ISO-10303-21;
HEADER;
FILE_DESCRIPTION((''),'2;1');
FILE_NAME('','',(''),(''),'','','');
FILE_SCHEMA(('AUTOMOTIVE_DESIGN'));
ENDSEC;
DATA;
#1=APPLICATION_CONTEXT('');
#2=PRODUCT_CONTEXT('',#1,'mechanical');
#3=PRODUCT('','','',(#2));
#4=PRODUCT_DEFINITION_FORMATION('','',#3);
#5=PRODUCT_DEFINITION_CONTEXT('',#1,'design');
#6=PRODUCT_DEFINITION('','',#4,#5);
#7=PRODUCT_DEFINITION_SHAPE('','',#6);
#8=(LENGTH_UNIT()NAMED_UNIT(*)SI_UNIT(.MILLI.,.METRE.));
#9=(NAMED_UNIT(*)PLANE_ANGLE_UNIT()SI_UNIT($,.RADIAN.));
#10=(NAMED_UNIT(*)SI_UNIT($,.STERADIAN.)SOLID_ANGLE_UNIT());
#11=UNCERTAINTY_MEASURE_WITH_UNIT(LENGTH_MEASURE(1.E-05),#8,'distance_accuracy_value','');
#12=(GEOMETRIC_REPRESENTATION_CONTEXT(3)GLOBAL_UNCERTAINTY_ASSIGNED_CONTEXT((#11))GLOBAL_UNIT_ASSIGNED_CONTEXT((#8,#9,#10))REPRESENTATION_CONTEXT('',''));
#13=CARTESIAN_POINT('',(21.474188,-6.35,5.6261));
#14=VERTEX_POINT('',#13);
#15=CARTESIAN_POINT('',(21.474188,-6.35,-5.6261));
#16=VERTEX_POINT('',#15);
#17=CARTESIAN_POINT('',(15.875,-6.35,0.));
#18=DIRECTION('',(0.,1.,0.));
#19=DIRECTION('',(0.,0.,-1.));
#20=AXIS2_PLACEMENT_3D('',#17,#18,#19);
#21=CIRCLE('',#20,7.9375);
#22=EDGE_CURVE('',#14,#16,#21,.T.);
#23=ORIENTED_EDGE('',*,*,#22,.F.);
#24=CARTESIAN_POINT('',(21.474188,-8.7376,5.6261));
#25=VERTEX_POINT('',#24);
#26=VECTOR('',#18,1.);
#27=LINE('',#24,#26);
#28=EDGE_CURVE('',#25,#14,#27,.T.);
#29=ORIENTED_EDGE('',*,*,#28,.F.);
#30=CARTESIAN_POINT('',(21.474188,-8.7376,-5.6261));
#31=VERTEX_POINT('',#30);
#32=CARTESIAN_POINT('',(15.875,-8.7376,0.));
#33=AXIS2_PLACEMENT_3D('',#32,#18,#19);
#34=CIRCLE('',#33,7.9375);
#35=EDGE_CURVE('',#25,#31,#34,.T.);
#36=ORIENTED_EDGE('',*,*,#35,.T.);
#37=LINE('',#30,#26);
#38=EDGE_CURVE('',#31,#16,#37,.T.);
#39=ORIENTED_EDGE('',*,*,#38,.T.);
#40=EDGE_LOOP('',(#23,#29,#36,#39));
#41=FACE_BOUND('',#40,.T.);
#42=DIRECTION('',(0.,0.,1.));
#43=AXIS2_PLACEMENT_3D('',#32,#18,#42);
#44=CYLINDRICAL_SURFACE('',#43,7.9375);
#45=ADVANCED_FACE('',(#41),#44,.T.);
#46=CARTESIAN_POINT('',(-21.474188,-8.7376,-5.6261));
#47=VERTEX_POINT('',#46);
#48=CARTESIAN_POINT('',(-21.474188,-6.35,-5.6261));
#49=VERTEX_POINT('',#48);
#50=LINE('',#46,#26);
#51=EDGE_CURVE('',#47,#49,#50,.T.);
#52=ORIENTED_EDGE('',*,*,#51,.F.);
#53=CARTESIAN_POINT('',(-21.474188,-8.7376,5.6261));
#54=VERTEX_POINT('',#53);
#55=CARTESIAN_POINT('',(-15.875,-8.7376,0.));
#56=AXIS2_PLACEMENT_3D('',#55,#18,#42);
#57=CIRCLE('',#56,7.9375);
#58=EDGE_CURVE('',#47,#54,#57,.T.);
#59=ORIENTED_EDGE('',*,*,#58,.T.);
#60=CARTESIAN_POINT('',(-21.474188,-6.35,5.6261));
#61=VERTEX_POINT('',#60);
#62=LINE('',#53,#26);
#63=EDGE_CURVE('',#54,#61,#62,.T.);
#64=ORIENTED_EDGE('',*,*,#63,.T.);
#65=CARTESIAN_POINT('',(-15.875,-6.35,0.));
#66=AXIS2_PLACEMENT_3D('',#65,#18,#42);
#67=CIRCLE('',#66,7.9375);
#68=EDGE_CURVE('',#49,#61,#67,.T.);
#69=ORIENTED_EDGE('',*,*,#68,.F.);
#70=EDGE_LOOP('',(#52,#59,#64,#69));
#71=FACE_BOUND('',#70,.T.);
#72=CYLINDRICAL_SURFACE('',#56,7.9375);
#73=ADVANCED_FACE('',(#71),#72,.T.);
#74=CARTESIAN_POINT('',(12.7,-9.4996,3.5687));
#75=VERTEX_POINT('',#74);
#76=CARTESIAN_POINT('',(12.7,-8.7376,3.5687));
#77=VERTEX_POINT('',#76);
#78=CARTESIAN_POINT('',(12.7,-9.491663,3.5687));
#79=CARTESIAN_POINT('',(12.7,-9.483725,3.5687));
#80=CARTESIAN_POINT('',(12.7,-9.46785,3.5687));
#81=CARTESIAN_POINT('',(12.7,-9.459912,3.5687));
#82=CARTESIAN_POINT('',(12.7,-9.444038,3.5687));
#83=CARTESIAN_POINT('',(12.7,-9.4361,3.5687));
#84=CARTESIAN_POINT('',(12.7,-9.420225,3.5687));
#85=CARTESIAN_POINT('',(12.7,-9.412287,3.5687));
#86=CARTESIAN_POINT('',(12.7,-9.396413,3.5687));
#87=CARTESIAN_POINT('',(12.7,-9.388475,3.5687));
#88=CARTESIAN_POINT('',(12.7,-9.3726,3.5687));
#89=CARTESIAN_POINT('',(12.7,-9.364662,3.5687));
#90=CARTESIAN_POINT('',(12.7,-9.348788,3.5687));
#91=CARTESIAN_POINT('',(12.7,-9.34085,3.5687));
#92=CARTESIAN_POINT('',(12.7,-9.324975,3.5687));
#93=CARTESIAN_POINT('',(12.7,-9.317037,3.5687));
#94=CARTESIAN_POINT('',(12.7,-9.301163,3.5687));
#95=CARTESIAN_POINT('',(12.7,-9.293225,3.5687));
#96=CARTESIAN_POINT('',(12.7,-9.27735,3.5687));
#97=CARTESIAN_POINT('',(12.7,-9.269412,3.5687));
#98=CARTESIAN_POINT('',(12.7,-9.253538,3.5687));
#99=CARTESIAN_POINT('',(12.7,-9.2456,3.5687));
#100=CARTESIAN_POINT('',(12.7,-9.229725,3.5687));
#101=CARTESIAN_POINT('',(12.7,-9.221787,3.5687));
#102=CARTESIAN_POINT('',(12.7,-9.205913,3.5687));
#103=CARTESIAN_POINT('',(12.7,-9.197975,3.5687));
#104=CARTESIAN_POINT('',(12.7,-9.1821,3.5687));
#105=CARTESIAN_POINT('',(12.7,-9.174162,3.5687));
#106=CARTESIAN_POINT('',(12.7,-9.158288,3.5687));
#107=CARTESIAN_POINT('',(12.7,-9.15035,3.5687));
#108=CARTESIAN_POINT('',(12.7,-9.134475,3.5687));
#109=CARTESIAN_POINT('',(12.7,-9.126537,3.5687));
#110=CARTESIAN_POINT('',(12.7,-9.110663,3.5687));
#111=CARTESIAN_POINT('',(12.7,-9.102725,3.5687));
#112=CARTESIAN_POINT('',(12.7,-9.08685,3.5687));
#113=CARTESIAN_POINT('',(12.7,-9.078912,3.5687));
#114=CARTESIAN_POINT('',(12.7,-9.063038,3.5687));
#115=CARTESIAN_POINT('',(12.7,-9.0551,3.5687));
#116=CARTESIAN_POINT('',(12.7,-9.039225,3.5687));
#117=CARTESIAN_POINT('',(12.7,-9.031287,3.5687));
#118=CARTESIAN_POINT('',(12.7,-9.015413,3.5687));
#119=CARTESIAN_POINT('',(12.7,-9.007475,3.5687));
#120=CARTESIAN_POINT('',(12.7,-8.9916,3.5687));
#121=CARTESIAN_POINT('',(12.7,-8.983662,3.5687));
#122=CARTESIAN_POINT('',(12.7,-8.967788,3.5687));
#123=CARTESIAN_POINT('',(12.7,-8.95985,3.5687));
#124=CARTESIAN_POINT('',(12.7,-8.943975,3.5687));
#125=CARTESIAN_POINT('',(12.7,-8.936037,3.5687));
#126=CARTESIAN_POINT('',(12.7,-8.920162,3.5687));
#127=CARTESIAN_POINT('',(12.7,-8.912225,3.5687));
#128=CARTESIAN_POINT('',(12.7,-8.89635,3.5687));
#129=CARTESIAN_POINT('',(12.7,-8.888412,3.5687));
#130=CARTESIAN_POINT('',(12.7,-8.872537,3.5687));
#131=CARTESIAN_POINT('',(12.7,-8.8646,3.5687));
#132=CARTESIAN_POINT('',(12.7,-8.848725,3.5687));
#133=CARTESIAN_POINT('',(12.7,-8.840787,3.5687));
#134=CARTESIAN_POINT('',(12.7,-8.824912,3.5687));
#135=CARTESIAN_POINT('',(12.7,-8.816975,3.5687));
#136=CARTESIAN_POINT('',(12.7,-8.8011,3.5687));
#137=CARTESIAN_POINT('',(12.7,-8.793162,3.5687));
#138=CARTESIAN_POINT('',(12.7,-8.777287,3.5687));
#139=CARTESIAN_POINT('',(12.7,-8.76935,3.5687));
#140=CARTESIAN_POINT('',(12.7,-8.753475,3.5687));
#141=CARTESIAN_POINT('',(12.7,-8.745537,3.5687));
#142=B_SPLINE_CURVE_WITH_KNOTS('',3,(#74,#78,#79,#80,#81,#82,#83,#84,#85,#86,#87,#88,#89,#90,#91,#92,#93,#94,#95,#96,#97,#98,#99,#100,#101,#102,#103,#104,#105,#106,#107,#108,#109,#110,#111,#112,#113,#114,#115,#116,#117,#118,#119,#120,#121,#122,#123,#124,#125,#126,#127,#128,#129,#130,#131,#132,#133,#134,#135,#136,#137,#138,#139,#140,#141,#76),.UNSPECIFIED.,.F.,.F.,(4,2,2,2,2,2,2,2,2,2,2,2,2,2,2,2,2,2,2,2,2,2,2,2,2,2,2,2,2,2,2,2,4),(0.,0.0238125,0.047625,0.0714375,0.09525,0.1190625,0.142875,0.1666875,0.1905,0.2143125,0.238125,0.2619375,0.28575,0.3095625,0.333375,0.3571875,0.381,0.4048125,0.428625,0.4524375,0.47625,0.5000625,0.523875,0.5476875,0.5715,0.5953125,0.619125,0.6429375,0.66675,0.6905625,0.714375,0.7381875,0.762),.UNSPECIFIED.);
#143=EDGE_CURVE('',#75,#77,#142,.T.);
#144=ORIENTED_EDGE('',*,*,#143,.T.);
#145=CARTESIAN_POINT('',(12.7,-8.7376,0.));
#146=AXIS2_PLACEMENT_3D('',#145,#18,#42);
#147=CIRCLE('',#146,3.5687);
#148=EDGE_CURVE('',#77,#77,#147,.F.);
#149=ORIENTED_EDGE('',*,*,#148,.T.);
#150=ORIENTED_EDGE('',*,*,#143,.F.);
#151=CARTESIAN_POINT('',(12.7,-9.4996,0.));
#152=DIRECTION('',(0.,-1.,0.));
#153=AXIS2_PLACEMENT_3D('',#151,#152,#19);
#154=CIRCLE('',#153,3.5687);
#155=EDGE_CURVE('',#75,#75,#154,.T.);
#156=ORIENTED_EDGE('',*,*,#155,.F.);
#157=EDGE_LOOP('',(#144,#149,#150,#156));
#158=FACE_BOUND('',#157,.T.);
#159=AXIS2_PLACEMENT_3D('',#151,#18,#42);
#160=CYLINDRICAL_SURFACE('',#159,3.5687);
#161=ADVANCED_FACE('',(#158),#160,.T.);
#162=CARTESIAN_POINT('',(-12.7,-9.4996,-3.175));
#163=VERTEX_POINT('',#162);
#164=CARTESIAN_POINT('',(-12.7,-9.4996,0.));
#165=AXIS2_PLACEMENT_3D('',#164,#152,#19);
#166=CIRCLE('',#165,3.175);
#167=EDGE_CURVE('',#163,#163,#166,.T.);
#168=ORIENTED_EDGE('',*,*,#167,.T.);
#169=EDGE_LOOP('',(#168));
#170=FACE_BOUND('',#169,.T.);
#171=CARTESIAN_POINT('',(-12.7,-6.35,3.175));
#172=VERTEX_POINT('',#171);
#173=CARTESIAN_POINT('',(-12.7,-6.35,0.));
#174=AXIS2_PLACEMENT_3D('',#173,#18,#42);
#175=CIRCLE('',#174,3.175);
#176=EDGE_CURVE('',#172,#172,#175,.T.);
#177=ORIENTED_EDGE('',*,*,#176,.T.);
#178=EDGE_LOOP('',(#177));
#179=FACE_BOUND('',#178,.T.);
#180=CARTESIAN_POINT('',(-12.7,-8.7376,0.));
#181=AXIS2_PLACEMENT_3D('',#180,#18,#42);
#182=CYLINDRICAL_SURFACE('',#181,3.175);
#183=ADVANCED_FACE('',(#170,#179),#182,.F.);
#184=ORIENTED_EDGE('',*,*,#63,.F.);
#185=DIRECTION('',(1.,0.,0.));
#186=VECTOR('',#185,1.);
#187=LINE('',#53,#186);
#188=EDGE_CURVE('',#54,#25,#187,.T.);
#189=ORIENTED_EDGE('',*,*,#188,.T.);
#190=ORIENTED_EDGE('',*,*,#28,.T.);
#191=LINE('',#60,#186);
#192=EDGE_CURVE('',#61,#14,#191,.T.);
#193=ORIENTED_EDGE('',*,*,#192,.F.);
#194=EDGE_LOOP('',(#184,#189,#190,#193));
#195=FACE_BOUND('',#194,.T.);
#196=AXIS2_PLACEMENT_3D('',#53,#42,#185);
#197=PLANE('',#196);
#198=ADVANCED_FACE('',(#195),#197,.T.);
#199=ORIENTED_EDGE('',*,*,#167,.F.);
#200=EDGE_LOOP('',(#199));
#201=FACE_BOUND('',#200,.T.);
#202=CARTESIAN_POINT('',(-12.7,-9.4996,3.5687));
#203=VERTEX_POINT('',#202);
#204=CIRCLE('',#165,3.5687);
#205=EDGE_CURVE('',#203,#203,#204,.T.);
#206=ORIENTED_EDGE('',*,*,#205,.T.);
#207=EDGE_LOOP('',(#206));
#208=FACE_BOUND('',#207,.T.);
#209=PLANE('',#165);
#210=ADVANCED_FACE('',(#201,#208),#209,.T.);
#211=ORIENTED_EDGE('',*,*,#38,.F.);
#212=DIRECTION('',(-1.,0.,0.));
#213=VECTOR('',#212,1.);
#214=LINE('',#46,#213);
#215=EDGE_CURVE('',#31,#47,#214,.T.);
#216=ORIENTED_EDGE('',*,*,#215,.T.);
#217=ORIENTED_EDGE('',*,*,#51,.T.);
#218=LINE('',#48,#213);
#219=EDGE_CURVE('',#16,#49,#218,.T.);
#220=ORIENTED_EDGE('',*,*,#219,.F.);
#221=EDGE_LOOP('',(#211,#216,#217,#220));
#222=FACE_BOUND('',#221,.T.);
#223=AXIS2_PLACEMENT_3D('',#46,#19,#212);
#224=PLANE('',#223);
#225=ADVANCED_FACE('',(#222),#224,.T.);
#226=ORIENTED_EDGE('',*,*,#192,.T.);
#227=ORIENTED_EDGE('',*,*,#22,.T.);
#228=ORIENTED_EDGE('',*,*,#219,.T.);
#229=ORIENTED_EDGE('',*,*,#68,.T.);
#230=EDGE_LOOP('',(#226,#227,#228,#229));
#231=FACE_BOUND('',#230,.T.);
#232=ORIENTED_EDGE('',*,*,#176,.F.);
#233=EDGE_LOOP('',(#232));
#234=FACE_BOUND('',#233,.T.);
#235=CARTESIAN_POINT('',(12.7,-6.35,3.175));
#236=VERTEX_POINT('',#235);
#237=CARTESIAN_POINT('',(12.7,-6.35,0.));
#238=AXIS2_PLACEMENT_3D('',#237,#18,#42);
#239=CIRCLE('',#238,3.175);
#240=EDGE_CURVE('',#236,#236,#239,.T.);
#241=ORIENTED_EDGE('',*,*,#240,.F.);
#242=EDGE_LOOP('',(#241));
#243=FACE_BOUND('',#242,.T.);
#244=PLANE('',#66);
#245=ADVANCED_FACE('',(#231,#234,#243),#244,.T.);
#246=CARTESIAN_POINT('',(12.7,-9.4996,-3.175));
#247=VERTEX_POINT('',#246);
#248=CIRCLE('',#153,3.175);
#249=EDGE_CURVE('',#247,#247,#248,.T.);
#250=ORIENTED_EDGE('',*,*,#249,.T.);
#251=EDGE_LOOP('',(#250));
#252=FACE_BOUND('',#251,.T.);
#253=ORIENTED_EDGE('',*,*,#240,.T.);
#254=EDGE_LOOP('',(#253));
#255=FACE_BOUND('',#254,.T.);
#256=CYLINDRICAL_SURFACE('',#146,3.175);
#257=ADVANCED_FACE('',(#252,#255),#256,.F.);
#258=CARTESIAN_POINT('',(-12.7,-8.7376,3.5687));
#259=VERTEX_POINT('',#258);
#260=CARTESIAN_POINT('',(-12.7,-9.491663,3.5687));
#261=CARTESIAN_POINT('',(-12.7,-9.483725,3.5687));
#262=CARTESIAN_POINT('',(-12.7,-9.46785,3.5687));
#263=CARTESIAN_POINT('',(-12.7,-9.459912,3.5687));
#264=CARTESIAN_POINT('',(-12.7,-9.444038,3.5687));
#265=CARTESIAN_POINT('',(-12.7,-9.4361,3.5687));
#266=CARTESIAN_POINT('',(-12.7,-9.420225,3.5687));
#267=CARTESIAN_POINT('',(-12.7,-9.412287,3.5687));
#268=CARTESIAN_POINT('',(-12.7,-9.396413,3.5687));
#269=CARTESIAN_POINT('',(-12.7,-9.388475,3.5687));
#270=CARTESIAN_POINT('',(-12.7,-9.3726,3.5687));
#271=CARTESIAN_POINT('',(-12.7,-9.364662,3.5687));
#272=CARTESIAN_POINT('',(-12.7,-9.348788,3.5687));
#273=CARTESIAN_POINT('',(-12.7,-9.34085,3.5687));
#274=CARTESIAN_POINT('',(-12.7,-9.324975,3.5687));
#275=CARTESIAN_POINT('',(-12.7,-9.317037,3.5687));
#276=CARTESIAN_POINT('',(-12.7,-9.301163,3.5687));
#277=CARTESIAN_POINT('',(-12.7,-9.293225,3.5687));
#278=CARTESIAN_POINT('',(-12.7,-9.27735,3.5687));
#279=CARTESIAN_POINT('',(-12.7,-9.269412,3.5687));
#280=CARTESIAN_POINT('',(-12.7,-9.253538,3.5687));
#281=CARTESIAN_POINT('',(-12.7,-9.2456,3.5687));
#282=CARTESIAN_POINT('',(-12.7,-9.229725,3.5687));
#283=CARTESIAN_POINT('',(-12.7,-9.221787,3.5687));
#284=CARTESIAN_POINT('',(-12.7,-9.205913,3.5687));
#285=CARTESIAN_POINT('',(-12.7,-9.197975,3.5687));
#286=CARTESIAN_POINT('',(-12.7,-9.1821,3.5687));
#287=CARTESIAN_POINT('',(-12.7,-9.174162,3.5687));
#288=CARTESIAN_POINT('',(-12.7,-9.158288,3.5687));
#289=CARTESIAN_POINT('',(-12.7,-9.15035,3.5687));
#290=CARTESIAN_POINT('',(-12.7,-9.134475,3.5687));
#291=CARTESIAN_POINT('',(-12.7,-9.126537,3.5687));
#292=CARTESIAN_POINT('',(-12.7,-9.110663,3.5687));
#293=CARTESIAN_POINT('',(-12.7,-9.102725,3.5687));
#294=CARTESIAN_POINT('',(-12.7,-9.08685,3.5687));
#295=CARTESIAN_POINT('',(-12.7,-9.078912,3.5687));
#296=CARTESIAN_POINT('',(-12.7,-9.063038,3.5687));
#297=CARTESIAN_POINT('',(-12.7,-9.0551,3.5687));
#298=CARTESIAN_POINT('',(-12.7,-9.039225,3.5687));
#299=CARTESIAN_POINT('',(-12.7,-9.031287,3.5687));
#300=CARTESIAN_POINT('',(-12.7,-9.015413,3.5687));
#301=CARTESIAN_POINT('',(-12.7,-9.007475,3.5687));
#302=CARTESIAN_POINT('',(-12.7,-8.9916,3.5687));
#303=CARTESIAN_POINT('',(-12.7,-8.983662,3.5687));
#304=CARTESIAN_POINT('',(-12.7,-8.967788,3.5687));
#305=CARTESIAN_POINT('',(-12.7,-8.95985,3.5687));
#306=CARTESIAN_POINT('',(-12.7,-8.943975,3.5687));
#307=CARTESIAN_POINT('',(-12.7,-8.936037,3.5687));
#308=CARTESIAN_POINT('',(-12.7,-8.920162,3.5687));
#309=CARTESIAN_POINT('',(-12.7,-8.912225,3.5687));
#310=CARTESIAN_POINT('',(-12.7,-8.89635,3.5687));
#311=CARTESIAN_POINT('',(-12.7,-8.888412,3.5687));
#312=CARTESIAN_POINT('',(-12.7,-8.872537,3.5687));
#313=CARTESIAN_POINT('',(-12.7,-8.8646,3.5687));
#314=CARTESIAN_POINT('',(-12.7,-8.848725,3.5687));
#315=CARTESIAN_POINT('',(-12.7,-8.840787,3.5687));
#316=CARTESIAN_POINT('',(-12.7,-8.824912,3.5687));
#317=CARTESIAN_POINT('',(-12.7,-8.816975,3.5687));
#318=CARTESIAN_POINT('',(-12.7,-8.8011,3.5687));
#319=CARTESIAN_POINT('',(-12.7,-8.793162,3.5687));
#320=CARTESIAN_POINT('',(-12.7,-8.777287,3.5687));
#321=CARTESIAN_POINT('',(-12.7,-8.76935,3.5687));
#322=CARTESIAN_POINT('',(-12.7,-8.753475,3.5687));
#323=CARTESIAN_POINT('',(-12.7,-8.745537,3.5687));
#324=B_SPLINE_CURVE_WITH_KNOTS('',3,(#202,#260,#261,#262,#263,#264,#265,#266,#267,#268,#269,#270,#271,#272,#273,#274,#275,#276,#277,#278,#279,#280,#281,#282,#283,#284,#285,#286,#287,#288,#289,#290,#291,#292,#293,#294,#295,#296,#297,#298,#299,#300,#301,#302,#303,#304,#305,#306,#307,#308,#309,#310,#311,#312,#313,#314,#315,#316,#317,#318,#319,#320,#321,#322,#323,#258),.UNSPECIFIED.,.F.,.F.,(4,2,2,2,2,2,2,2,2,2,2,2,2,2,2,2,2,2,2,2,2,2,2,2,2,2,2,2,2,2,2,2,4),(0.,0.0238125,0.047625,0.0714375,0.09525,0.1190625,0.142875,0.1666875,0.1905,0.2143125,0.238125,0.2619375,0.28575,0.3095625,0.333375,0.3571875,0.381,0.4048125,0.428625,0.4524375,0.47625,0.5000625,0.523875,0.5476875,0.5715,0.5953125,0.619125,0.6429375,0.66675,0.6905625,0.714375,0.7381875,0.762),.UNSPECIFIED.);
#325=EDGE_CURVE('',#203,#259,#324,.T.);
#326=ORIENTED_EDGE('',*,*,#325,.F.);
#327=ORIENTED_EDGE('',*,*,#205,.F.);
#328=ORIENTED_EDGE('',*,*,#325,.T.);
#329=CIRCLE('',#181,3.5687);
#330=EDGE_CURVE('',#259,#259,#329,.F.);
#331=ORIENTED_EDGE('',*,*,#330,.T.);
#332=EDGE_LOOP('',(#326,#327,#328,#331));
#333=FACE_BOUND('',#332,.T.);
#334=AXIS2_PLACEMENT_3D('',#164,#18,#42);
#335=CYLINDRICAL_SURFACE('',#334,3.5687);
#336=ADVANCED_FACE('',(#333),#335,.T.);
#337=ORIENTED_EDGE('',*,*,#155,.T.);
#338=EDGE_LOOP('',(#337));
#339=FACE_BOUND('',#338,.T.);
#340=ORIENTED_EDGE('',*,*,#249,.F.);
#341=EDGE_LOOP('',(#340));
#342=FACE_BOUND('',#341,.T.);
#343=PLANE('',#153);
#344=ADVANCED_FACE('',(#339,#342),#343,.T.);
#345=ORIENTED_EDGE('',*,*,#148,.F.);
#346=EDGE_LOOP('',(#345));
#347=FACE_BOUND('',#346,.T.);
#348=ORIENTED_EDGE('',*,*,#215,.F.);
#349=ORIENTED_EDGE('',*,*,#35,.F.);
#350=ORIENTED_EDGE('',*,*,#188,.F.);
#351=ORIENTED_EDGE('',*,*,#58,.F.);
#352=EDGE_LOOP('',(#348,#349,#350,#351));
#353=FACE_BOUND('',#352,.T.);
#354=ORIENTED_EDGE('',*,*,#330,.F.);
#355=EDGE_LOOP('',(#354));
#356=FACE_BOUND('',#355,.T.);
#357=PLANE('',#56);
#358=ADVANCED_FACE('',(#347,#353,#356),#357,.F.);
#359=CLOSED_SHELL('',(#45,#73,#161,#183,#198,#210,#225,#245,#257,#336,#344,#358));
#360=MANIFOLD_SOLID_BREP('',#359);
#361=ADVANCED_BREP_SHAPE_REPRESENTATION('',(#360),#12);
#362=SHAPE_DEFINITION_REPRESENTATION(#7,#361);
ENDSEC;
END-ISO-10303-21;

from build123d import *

# Parameters (mm, degrees)
SKETCH1_R           = 3.175
BOSS_EXTRUDE1_DEPTH = 12.7
CUT_SWEEP1_PITCH    = 1.27
SKETCH4_OUTSIDE_W   = 14
SKETCH4_OUTSIDE_H   = 14
SKETCH4_OUTSIDE_R   = 2.21262927
CUT_EXTRUDE1_DEPTH  = 1.27
CUT_EXTRUDE1_DRAFT  = -45
CUT_EXTRUDE2_DEPTH  = 2.38125
BOSS_EXTRUDE2_START = -6.35
SKETCH8_R           = 3.175
BOSS_EXTRUDE2_DEPTH = 2.3876
SKETCH9_R           = 3.5687
SKETCH9_R_2         = 3.175
BOSS_EXTRUDE3_DEPTH = 0.762


with BuildPart() as part:
    # Sketch1 → Boss-Extrude1 (new body)
    with BuildSketch(Plane(origin=(0, 0, 0), x_dir=(1, 0, 0), z_dir=(0, 1, 0))):
        with Locations(Location((-12.7, 0, 0), (0, 0, 270))):
            Circle(SKETCH1_R)
    extrude(amount=-BOSS_EXTRUDE1_DEPTH)

    # Cut-Sweep1: the profile of Sketch3 screwed along a right-hand helix of 11 turns, 8 arcs to a turn; built about Z, then put on its axis
    cut_sweep1_z = Axis((0, 0, 0), (0, 0, 1))
    cut_sweep1_corners = [(2.350110803, 0, -0.47625), (3.243740766, 0, 0.0396875), (3.243740766, 0, -1.1509375), (2.350110803, 0, -0.635)]
    with BuildLine(mode=Mode.PRIVATE) as cut_sweep1_profile:
        Line(cut_sweep1_corners[0], cut_sweep1_corners[1])
        Line(cut_sweep1_corners[1], cut_sweep1_corners[2])
        Line(cut_sweep1_corners[2], cut_sweep1_corners[3])
        Line(cut_sweep1_corners[3], cut_sweep1_corners[0])
    cut_sweep1_cap = Face(cut_sweep1_profile.wire())
    cut_sweep1_turn_angles = [0, 22.5, 45, 67.5, 90, 112.5, 135, 157.5, 180, 202.5, 225, 247.5, 270, 292.5, 315, 337.5, 360]
    cut_sweep1_turn_weights = [1, 0.9238795325112867, 1, 0.9238795325112867, 1, 0.9238795325112867, 1, 0.9238795325112867, 1, 0.9238795325112867, 1, 0.9238795325112867, 1, 0.9238795325112867, 1, 0.9238795325112867, 1]
    cut_sweep1_turn_rails = [Edge.make_bspline([Vector(p[0], p[1], 0).rotate(cut_sweep1_z, cut_sweep1_turn_angles[k]) / cut_sweep1_turn_weights[k] + Vector(0, 0, p[2] + CUT_SWEEP1_PITCH * cut_sweep1_turn_angles[k] / 360) for k in range(17)], [0, 0, 0, 1, 1, 2, 2, 3, 3, 4, 4, 5, 5, 6, 6, 7, 7, 8, 8, 8], 2, cut_sweep1_turn_weights) for p in cut_sweep1_corners]
    cut_sweep1_turn_sides = [Face.make_surface_from_curves(cut_sweep1_turn_rails[p[0]], cut_sweep1_turn_rails[p[1]]) for p in [(0, 1), (1, 2), (2, 3), (3, 0)]]
    cut_sweep1 = Plane(origin=(-12.7, -12.7, 0), x_dir=(0, 0, -1), z_dir=(0, 1, 0)) * Solid(Shell([*[p.moved(Location((0, 0, CUT_SWEEP1_PITCH * i))) for i in range(11) for p in cut_sweep1_turn_sides], cut_sweep1_cap, cut_sweep1_cap.rotate(cut_sweep1_z, 3960).moved(Location((0, 0, CUT_SWEEP1_PITCH * 3960 / 360)))]))
    add(cut_sweep1, mode=Mode.SUBTRACT)


with BuildPart() as cut_extrude1_tool:
    # Sketch4 outside → Cut-Extrude1 (with draft: the straight prism first)
    with BuildSketch(Plane.XZ.offset(12.7)):
        with Locations((-12.7, 0)):
            Rectangle(SKETCH4_OUTSIDE_W, SKETCH4_OUTSIDE_H)
        with Locations((-12.7, 0)):
            Circle(SKETCH4_OUTSIDE_R, mode=Mode.SUBTRACT)
    extrude(amount=-CUT_EXTRUDE1_DEPTH)
    # Cut-Extrude1: the draft: its side faces are tilted about the plane it starts from
    cut_extrude1_sides = [cut_extrude1_tool.faces().sort_by_distance(p)[0] for p in [
        (-12.7, -12.065, -7),
        (-5.7, -12.065, 0),
        (-12.7, -12.065, 7),
        (-19.7, -12.065, 0),
        (-14.91262927, -12.065, 0),
    ]]
    draft(cut_extrude1_sides, Plane.XZ.offset(12.7), CUT_EXTRUDE1_DRAFT)


with BuildPart() as part_1:
    add(part.part)

    # Cut-Extrude1: cut by cut_extrude1_tool
    add(cut_extrude1_tool.part, mode=Mode.SUBTRACT)

    # Sketch5 → Revolve1 (revolve)
    with BuildSketch(Plane.XY, mode=Mode.PRIVATE) as revolve1_sk:
        with BuildLine():
            Line((-12.7, 0), (-12.7, 3.3528))
            Line((-12.7, 3.3528), (-15.875, 3.3528))
            ThreePointArc((-15.875, 3.3528), (-17.240019085, 2.263204136), (-18.2499, 0.8382))
            Line((-18.2499, 0.8382), (-19.6342, 0.8382))
            Line((-19.6342, 0.8382), (-19.6342, 0))
            Line((-19.6342, 0), (-12.7, 0))
        make_face()
    revolve(revolve1_sk.sketch.rotate(Axis((-12.7, 0, 0), (0, 1, 0)), 270), axis=Axis((-12.7, 0, 0), (0, 1, 0)))

    # Sketch6 → Cut-Extrude2 (cut)
    with BuildSketch(Plane(origin=(0, 3.3528, 0), x_dir=(1, 0, 0), z_dir=(0, 1, 0))):
        Polygon((-12.7, 2.291358881), (-14.684375, 1.14567944), (-14.684375, -1.14567944), (-12.7, -2.291358881), (-10.715625, -1.14567944), (-10.715625, 1.14567944), align=None)
    extrude(amount=-CUT_EXTRUDE2_DEPTH, mode=Mode.SUBTRACT)

    # Cut-Extrude3 cone 1 section (through the dimple's axis) → Cut-Extrude3 (revolve, cut)
    with BuildSketch(Plane(origin=(-12.7, 3.3528, 0), x_dir=(0, 0, 1), z_dir=(1, 0, 0))):
        Polygon((0, 0), (2.291358881, 0), (0, 2.291358881), align=None)
    revolve(axis=Axis((-12.7, 3.3528, 0), (0, -1, 0)), mode=Mode.SUBTRACT)


with BuildPart() as body_2:
    # Body-Move/Copy1: copy of part
    add(part_1.part.moved(Location((25.4, 0, 0))))


with BuildPart() as body_3:
    # Sketch8 → Boss-Extrude2 (new body)
    with BuildSketch(Plane(origin=(0, 0, 0), x_dir=(1, 0, 0), z_dir=(0, 1, 0)).offset(BOSS_EXTRUDE2_START)):
        with BuildLine():
            Line((-21.474187891, 5.6261), (21.474187891, 5.6261))
            ThreePointArc((21.474187891, 5.6261), (23.8125, 0), (21.474187891, -5.6261))
            Line((21.474187891, -5.6261), (-21.474187891, -5.6261))
            ThreePointArc((-21.474187891, -5.6261), (-23.8125, 0), (-21.474187891, 5.6261))
        make_face()
        with Locations(Location((-12.7, 0, 0), (0, 0, 270))):
            Circle(SKETCH8_R, mode=Mode.SUBTRACT)
        with Locations(Location((12.7, 0, 0), (0, 0, 270))):
            Circle(SKETCH8_R, mode=Mode.SUBTRACT)
    extrude(amount=-BOSS_EXTRUDE2_DEPTH)

    # Sketch9 → Boss-Extrude3 (add)
    # profile 1 of 2: a face of its own
    with BuildSketch(Plane.XZ.offset(8.7376)):
        with Locations(Location((-12.7, 0, 0), (0, 0, 90))):
            Circle(SKETCH9_R)
        with Locations(Location((-12.7, 0, 0), (0, 0, 90))):
            Circle(SKETCH9_R_2, mode=Mode.SUBTRACT)
    # profile 2 of 2: a face of its own
    with BuildSketch(Plane.XZ.offset(8.7376)):
        with Locations(Location((12.7, 0, 0), (0, 0, 90))):
            Circle(SKETCH9_R)
        with Locations(Location((12.7, 0, 0), (0, 0, 90))):
            Circle(SKETCH9_R_2, mode=Mode.SUBTRACT)
    extrude(amount=BOSS_EXTRUDE3_DEPTH)


solid = body_3.part
